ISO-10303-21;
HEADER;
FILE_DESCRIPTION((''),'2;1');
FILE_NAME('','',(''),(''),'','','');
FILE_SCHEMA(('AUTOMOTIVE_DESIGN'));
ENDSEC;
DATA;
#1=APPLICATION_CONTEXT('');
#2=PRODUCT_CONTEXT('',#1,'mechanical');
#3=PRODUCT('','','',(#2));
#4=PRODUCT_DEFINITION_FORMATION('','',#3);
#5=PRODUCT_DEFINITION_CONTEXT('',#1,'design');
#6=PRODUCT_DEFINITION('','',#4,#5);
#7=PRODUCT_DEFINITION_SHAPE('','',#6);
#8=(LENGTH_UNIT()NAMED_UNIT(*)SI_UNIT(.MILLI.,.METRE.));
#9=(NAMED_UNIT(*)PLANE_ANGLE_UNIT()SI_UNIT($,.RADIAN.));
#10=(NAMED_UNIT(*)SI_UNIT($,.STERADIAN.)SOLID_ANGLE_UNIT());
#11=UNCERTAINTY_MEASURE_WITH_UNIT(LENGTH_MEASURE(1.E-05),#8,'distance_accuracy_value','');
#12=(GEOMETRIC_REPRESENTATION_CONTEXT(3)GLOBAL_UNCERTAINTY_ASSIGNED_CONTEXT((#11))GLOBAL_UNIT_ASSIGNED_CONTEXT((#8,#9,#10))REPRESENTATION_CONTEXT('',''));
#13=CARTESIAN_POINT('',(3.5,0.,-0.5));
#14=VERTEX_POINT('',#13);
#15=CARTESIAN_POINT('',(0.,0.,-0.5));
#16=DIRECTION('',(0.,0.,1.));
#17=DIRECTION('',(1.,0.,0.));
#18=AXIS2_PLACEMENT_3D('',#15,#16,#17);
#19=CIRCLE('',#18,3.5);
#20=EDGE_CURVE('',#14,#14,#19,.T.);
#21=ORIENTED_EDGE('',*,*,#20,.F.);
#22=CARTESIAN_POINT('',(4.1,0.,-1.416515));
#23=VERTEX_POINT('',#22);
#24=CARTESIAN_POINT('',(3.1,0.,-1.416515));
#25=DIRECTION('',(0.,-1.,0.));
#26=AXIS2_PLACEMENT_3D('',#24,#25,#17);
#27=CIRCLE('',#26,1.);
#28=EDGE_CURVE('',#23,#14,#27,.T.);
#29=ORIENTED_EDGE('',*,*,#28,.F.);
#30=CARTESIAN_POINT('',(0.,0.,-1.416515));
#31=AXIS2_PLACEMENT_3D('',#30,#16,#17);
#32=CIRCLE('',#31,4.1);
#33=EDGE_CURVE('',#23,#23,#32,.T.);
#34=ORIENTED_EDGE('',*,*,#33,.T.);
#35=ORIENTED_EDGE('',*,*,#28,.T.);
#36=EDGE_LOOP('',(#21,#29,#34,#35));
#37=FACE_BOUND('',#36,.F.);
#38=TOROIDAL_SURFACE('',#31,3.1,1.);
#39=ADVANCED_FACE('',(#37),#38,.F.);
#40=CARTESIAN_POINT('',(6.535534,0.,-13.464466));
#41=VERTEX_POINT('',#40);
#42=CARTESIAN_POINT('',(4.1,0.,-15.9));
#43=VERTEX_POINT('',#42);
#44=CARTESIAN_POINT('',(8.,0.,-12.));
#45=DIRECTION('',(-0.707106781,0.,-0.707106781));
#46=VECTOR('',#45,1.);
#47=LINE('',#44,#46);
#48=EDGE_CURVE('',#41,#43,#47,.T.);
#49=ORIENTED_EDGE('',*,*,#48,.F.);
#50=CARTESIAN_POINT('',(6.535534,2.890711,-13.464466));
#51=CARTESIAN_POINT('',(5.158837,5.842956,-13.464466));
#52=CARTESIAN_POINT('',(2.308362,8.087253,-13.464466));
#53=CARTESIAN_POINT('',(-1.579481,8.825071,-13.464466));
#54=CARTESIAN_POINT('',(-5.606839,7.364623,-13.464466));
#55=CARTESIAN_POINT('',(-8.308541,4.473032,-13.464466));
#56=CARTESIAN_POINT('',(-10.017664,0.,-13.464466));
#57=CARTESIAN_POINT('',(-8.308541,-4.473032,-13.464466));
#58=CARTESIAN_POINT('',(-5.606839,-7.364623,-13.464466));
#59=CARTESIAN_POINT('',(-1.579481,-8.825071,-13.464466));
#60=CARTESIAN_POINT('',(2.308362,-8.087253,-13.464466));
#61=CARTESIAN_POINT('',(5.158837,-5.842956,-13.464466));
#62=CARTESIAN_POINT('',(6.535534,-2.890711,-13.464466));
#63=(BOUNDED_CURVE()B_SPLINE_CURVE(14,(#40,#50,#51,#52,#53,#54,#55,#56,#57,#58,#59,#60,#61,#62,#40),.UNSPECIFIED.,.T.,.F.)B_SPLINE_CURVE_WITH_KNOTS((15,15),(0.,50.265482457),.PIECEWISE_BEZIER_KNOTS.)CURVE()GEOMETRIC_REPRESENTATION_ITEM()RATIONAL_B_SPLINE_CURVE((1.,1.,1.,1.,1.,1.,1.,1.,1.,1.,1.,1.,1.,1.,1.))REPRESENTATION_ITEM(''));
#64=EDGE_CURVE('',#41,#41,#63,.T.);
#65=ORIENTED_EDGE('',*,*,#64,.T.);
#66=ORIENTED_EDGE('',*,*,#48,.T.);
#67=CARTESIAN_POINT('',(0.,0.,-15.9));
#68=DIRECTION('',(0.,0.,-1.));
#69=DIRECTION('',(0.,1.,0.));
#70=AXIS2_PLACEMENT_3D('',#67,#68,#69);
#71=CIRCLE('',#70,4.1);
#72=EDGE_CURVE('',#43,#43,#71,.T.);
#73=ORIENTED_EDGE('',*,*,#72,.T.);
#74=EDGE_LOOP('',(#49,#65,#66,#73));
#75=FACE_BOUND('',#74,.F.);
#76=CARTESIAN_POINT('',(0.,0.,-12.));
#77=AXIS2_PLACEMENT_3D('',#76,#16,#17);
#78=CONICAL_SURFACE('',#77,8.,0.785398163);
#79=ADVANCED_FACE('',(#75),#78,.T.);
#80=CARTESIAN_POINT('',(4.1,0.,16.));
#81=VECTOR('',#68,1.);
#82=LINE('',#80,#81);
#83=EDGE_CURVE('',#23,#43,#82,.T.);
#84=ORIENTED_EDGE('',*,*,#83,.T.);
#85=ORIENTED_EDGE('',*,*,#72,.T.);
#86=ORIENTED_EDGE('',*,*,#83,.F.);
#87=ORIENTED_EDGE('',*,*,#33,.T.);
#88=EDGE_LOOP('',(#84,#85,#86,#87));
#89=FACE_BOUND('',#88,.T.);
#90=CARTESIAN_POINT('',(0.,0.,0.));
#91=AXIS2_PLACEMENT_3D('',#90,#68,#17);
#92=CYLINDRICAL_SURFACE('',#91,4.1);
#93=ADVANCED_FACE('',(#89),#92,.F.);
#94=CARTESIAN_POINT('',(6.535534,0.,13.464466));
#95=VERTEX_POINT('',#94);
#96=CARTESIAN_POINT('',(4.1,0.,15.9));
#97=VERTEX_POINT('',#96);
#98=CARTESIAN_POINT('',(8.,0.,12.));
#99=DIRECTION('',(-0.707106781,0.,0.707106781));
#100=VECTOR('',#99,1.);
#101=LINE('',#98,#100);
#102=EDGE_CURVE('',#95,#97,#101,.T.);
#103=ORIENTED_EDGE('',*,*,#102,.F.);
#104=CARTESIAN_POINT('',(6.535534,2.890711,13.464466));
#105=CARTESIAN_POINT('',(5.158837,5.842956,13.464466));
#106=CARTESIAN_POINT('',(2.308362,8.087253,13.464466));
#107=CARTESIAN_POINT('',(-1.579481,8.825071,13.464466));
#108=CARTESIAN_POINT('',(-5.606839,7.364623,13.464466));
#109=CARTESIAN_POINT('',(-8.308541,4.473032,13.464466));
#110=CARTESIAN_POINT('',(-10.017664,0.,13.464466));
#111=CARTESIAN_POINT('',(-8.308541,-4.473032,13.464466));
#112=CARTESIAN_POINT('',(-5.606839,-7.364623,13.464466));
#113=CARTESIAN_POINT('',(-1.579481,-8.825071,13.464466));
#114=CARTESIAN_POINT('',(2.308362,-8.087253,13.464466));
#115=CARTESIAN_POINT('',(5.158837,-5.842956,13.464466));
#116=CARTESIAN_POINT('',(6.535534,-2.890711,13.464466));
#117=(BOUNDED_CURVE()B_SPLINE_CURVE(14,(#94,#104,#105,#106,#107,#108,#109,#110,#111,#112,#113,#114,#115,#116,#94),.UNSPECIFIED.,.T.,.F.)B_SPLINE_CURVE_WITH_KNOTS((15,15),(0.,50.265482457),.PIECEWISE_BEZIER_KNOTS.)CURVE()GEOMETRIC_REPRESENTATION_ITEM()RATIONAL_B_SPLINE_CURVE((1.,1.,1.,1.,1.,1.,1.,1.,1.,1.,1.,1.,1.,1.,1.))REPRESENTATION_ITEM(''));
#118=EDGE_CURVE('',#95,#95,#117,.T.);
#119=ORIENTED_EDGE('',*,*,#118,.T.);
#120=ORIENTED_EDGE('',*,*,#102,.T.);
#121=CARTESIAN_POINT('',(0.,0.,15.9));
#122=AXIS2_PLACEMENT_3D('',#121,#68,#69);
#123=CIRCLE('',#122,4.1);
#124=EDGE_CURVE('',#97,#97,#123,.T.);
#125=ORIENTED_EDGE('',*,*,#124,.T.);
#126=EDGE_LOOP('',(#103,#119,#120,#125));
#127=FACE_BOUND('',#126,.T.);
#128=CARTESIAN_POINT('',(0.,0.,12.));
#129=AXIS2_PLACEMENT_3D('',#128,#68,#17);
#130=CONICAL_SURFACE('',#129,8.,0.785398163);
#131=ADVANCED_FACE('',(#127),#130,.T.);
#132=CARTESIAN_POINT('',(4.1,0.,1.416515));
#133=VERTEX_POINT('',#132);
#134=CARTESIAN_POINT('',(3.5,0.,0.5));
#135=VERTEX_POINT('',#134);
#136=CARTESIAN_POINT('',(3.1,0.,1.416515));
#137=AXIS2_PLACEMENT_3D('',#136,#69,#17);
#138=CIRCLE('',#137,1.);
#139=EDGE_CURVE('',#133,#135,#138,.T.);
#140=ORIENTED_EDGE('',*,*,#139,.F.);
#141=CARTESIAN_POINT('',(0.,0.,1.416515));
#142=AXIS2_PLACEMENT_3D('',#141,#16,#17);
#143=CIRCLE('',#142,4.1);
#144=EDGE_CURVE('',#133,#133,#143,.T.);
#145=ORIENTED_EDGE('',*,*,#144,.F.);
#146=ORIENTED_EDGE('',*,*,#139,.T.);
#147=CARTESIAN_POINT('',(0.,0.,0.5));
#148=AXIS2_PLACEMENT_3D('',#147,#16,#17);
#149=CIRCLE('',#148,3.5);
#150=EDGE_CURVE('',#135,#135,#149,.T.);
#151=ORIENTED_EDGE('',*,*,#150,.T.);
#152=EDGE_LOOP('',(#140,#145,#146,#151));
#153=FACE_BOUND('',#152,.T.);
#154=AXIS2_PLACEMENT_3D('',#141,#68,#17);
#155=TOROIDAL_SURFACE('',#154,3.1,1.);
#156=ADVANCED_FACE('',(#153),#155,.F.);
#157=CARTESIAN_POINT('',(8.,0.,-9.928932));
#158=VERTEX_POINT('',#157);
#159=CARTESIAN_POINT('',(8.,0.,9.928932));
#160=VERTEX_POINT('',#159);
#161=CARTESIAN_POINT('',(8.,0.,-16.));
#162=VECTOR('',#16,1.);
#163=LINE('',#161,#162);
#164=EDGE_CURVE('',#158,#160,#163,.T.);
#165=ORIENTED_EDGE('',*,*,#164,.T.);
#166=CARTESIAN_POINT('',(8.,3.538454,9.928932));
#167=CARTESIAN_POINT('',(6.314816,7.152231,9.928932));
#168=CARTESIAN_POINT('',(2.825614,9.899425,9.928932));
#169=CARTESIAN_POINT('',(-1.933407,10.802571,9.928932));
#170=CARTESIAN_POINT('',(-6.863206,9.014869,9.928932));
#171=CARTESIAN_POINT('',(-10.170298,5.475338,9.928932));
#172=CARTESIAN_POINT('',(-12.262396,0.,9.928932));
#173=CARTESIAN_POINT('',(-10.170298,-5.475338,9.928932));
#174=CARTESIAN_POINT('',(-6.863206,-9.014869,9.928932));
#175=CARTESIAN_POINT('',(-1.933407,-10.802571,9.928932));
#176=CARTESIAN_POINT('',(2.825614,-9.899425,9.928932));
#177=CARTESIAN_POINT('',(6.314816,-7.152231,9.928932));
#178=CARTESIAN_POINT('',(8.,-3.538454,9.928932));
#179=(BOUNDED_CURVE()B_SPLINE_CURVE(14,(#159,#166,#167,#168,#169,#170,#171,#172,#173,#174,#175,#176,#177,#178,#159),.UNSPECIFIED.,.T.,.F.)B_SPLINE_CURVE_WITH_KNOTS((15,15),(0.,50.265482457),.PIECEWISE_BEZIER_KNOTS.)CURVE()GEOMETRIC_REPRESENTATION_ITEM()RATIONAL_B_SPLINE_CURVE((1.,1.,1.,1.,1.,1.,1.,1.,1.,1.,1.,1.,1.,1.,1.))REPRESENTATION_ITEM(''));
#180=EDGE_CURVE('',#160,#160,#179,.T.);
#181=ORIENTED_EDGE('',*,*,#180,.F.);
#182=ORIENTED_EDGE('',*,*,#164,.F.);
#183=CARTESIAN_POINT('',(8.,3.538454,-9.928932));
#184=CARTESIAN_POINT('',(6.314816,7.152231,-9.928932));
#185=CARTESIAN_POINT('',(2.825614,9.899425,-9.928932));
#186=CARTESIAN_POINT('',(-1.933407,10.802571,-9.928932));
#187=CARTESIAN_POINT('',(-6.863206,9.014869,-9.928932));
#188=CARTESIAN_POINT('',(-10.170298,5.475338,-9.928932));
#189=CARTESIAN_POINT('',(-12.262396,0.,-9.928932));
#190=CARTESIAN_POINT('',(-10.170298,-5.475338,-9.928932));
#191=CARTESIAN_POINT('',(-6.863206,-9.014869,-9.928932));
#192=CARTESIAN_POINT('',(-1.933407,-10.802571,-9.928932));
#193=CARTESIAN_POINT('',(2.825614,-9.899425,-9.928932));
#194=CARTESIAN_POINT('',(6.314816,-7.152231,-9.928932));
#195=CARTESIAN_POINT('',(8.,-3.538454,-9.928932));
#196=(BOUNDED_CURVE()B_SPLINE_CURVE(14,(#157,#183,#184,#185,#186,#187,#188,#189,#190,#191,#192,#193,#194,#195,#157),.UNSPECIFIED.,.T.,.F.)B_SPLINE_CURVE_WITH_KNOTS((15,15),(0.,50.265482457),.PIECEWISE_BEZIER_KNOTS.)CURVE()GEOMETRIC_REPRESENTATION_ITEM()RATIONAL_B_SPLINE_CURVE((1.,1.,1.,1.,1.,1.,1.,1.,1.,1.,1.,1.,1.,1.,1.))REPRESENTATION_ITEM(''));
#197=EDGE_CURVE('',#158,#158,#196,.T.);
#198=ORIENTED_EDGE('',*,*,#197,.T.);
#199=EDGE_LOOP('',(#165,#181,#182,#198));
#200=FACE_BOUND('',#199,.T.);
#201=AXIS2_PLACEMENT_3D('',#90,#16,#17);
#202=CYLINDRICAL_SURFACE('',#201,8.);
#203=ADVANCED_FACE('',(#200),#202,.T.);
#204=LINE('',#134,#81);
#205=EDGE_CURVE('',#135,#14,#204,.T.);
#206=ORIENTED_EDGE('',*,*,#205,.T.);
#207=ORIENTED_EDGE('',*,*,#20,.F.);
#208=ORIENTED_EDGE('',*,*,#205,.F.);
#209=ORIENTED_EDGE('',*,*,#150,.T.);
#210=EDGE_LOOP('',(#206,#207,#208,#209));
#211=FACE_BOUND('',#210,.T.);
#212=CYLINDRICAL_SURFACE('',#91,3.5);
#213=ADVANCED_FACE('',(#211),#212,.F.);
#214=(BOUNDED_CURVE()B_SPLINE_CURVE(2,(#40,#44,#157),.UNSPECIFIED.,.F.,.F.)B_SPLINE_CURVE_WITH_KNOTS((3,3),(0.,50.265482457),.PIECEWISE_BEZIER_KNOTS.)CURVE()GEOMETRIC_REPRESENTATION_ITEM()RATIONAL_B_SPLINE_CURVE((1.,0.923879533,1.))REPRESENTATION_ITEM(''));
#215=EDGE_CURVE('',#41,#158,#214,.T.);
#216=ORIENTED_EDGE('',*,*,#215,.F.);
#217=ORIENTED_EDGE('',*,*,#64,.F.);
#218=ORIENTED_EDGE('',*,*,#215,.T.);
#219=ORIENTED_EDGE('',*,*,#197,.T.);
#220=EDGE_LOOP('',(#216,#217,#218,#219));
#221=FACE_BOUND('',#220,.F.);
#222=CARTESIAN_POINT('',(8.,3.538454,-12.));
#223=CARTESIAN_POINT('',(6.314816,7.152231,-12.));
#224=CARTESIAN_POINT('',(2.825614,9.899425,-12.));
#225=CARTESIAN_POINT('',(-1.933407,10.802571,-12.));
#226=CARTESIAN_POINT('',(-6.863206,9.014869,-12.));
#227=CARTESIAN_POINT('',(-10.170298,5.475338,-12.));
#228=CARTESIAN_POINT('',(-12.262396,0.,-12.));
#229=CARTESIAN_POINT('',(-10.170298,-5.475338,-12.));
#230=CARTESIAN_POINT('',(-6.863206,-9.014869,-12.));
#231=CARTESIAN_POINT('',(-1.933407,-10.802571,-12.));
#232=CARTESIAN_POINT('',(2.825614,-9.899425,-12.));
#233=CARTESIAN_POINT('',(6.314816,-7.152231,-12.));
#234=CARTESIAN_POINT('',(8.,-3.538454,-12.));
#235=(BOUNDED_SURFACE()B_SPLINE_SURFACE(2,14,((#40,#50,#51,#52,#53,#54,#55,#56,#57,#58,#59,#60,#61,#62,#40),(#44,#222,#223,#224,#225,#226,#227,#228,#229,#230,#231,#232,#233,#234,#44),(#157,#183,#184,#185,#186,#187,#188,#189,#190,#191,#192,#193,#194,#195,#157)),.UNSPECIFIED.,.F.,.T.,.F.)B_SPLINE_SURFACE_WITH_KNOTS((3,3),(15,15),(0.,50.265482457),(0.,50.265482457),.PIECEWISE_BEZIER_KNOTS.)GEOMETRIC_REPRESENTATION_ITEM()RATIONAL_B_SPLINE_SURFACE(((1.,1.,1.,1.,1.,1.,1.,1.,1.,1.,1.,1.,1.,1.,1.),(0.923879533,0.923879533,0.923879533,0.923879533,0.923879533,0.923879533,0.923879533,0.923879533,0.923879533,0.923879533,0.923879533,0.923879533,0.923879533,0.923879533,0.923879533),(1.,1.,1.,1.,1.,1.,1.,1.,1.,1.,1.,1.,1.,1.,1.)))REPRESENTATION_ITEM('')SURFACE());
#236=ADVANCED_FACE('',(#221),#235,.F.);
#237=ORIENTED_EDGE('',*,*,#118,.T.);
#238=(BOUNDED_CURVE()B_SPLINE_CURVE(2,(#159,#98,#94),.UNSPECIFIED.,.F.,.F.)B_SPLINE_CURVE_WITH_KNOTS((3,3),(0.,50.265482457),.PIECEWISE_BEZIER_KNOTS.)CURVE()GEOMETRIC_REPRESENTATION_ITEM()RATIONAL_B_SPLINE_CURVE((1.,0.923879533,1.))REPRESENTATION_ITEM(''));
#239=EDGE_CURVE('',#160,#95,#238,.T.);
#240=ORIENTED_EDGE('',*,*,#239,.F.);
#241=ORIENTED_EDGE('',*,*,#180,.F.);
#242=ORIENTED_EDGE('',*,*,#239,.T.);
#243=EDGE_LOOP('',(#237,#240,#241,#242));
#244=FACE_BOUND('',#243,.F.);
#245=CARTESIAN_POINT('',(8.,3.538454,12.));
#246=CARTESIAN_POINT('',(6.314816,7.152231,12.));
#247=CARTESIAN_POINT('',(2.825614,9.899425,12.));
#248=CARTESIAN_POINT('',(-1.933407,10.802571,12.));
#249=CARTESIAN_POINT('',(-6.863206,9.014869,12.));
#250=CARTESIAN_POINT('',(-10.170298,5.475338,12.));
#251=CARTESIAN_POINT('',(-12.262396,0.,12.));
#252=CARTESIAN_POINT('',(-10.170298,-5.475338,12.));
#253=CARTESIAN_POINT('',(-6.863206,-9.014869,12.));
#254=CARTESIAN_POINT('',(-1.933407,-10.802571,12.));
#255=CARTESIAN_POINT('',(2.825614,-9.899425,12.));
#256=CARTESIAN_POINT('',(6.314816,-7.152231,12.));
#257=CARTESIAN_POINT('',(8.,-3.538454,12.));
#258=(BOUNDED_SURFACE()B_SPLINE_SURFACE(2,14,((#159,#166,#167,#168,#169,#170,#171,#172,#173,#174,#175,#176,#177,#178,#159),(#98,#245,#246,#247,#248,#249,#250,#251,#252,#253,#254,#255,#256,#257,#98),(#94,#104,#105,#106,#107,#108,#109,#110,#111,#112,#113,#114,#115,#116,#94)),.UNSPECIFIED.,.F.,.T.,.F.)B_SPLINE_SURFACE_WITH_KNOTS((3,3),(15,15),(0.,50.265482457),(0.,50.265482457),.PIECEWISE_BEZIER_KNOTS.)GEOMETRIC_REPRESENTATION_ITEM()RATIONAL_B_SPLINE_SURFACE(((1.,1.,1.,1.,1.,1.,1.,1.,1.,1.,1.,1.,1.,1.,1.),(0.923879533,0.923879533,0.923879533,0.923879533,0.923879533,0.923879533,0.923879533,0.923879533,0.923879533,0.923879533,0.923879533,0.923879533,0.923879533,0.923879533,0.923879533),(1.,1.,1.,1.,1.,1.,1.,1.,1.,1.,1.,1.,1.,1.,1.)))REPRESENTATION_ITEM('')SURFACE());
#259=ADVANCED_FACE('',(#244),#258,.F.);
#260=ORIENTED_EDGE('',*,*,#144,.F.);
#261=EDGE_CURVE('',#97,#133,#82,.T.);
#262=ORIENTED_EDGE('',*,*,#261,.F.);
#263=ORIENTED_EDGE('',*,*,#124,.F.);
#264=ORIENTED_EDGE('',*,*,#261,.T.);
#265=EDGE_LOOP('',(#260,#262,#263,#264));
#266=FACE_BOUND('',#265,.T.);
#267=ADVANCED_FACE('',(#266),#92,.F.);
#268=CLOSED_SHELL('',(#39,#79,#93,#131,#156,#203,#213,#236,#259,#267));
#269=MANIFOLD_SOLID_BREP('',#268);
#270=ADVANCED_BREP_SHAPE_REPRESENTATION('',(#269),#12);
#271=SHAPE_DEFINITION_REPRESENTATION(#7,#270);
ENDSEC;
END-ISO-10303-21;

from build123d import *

# Parameters (mm, degrees)
F0_R     = 4.1
F0_R_2   = 3.5
F1_DEPTH = 0.5
F0_R_3   = 8
F2_DEPTH = 16
F5_R     = 5


# Not quite as in the source:
# - a fillet or chamfer that OpenCascade refuses, or shapes differently, is made with other operations: its cross-section is extruded or revolved along the edge and cut away or added


with BuildPart() as f1:
    # F0 (on Top) → F1 (new body, symmetric)
    with BuildSketch(Plane.XY):
        Circle(F0_R)
        Circle(F0_R_2, mode=Mode.SUBTRACT)
    extrude(amount=F1_DEPTH, both=True)

    # F0 (on Top) → F2 (join, symmetric)
    with BuildSketch(Plane.XY):
        Circle(F0_R_3)
        Circle(F0_R, mode=Mode.SUBTRACT)
    extrude(amount=F2_DEPTH, both=True)

    # F3: fillet of radius 1 on 2 edges, made by hand

    # F3_s1 → F3_t2 (revolve)
    with BuildSketch(Plane.XZ):
        with BuildLine():
            ThreePointArc((4.1, 1.416515139), (3.9366600265, 0.8687925815), (3.5, 0.5))
            Line((3.5, 0.5), (4.1, 0.5))
            Line((4.1, 0.5), (4.1, 1.416515139))
        make_face()
    revolve(axis=Axis((0, 0, 0.5), (0, 0, 1)))

    # F3_s3 → F3_t4 (revolve)
    with BuildSketch(Plane.XZ):
        with BuildLine():
            ThreePointArc((4.1, -1.416515139), (3.9366600265, -0.8687925815), (3.5, -0.5))
            Line((3.5, -0.5), (4.1, -0.5))
            Line((4.1, -0.5), (4.1, -1.416515139))
        make_face()
    revolve(axis=Axis((0, 0, -0.5), (0, 0, 1)))

    # F4: chamfer of 4 on 2 edges, made by hand

    # F4_s1 → F4_t2 (revolve, cut)
    with BuildSketch(Plane.XZ):
        Polygon((8, -12), (4, -16), (8, -16), align=None)
    revolve(axis=Axis((0, 0, -16), (0, 0, 1)), mode=Mode.SUBTRACT)

    # F4_s3 → F4_t4 (revolve, cut)
    with BuildSketch(Plane.XZ):
        Polygon((8, 12), (4, 16), (8, 16), align=None)
    revolve(axis=Axis((0, 0, 16), (0, 0, 1)), mode=Mode.SUBTRACT)

    # F5
    f5_edges = [f1.edges().sort_by_distance(p)[0] for p in [
        (-8, 0, -12),
        (-8, 0, 12),
    ]]
    fillet(f5_edges, radius=F5_R)


solid = f1.part
